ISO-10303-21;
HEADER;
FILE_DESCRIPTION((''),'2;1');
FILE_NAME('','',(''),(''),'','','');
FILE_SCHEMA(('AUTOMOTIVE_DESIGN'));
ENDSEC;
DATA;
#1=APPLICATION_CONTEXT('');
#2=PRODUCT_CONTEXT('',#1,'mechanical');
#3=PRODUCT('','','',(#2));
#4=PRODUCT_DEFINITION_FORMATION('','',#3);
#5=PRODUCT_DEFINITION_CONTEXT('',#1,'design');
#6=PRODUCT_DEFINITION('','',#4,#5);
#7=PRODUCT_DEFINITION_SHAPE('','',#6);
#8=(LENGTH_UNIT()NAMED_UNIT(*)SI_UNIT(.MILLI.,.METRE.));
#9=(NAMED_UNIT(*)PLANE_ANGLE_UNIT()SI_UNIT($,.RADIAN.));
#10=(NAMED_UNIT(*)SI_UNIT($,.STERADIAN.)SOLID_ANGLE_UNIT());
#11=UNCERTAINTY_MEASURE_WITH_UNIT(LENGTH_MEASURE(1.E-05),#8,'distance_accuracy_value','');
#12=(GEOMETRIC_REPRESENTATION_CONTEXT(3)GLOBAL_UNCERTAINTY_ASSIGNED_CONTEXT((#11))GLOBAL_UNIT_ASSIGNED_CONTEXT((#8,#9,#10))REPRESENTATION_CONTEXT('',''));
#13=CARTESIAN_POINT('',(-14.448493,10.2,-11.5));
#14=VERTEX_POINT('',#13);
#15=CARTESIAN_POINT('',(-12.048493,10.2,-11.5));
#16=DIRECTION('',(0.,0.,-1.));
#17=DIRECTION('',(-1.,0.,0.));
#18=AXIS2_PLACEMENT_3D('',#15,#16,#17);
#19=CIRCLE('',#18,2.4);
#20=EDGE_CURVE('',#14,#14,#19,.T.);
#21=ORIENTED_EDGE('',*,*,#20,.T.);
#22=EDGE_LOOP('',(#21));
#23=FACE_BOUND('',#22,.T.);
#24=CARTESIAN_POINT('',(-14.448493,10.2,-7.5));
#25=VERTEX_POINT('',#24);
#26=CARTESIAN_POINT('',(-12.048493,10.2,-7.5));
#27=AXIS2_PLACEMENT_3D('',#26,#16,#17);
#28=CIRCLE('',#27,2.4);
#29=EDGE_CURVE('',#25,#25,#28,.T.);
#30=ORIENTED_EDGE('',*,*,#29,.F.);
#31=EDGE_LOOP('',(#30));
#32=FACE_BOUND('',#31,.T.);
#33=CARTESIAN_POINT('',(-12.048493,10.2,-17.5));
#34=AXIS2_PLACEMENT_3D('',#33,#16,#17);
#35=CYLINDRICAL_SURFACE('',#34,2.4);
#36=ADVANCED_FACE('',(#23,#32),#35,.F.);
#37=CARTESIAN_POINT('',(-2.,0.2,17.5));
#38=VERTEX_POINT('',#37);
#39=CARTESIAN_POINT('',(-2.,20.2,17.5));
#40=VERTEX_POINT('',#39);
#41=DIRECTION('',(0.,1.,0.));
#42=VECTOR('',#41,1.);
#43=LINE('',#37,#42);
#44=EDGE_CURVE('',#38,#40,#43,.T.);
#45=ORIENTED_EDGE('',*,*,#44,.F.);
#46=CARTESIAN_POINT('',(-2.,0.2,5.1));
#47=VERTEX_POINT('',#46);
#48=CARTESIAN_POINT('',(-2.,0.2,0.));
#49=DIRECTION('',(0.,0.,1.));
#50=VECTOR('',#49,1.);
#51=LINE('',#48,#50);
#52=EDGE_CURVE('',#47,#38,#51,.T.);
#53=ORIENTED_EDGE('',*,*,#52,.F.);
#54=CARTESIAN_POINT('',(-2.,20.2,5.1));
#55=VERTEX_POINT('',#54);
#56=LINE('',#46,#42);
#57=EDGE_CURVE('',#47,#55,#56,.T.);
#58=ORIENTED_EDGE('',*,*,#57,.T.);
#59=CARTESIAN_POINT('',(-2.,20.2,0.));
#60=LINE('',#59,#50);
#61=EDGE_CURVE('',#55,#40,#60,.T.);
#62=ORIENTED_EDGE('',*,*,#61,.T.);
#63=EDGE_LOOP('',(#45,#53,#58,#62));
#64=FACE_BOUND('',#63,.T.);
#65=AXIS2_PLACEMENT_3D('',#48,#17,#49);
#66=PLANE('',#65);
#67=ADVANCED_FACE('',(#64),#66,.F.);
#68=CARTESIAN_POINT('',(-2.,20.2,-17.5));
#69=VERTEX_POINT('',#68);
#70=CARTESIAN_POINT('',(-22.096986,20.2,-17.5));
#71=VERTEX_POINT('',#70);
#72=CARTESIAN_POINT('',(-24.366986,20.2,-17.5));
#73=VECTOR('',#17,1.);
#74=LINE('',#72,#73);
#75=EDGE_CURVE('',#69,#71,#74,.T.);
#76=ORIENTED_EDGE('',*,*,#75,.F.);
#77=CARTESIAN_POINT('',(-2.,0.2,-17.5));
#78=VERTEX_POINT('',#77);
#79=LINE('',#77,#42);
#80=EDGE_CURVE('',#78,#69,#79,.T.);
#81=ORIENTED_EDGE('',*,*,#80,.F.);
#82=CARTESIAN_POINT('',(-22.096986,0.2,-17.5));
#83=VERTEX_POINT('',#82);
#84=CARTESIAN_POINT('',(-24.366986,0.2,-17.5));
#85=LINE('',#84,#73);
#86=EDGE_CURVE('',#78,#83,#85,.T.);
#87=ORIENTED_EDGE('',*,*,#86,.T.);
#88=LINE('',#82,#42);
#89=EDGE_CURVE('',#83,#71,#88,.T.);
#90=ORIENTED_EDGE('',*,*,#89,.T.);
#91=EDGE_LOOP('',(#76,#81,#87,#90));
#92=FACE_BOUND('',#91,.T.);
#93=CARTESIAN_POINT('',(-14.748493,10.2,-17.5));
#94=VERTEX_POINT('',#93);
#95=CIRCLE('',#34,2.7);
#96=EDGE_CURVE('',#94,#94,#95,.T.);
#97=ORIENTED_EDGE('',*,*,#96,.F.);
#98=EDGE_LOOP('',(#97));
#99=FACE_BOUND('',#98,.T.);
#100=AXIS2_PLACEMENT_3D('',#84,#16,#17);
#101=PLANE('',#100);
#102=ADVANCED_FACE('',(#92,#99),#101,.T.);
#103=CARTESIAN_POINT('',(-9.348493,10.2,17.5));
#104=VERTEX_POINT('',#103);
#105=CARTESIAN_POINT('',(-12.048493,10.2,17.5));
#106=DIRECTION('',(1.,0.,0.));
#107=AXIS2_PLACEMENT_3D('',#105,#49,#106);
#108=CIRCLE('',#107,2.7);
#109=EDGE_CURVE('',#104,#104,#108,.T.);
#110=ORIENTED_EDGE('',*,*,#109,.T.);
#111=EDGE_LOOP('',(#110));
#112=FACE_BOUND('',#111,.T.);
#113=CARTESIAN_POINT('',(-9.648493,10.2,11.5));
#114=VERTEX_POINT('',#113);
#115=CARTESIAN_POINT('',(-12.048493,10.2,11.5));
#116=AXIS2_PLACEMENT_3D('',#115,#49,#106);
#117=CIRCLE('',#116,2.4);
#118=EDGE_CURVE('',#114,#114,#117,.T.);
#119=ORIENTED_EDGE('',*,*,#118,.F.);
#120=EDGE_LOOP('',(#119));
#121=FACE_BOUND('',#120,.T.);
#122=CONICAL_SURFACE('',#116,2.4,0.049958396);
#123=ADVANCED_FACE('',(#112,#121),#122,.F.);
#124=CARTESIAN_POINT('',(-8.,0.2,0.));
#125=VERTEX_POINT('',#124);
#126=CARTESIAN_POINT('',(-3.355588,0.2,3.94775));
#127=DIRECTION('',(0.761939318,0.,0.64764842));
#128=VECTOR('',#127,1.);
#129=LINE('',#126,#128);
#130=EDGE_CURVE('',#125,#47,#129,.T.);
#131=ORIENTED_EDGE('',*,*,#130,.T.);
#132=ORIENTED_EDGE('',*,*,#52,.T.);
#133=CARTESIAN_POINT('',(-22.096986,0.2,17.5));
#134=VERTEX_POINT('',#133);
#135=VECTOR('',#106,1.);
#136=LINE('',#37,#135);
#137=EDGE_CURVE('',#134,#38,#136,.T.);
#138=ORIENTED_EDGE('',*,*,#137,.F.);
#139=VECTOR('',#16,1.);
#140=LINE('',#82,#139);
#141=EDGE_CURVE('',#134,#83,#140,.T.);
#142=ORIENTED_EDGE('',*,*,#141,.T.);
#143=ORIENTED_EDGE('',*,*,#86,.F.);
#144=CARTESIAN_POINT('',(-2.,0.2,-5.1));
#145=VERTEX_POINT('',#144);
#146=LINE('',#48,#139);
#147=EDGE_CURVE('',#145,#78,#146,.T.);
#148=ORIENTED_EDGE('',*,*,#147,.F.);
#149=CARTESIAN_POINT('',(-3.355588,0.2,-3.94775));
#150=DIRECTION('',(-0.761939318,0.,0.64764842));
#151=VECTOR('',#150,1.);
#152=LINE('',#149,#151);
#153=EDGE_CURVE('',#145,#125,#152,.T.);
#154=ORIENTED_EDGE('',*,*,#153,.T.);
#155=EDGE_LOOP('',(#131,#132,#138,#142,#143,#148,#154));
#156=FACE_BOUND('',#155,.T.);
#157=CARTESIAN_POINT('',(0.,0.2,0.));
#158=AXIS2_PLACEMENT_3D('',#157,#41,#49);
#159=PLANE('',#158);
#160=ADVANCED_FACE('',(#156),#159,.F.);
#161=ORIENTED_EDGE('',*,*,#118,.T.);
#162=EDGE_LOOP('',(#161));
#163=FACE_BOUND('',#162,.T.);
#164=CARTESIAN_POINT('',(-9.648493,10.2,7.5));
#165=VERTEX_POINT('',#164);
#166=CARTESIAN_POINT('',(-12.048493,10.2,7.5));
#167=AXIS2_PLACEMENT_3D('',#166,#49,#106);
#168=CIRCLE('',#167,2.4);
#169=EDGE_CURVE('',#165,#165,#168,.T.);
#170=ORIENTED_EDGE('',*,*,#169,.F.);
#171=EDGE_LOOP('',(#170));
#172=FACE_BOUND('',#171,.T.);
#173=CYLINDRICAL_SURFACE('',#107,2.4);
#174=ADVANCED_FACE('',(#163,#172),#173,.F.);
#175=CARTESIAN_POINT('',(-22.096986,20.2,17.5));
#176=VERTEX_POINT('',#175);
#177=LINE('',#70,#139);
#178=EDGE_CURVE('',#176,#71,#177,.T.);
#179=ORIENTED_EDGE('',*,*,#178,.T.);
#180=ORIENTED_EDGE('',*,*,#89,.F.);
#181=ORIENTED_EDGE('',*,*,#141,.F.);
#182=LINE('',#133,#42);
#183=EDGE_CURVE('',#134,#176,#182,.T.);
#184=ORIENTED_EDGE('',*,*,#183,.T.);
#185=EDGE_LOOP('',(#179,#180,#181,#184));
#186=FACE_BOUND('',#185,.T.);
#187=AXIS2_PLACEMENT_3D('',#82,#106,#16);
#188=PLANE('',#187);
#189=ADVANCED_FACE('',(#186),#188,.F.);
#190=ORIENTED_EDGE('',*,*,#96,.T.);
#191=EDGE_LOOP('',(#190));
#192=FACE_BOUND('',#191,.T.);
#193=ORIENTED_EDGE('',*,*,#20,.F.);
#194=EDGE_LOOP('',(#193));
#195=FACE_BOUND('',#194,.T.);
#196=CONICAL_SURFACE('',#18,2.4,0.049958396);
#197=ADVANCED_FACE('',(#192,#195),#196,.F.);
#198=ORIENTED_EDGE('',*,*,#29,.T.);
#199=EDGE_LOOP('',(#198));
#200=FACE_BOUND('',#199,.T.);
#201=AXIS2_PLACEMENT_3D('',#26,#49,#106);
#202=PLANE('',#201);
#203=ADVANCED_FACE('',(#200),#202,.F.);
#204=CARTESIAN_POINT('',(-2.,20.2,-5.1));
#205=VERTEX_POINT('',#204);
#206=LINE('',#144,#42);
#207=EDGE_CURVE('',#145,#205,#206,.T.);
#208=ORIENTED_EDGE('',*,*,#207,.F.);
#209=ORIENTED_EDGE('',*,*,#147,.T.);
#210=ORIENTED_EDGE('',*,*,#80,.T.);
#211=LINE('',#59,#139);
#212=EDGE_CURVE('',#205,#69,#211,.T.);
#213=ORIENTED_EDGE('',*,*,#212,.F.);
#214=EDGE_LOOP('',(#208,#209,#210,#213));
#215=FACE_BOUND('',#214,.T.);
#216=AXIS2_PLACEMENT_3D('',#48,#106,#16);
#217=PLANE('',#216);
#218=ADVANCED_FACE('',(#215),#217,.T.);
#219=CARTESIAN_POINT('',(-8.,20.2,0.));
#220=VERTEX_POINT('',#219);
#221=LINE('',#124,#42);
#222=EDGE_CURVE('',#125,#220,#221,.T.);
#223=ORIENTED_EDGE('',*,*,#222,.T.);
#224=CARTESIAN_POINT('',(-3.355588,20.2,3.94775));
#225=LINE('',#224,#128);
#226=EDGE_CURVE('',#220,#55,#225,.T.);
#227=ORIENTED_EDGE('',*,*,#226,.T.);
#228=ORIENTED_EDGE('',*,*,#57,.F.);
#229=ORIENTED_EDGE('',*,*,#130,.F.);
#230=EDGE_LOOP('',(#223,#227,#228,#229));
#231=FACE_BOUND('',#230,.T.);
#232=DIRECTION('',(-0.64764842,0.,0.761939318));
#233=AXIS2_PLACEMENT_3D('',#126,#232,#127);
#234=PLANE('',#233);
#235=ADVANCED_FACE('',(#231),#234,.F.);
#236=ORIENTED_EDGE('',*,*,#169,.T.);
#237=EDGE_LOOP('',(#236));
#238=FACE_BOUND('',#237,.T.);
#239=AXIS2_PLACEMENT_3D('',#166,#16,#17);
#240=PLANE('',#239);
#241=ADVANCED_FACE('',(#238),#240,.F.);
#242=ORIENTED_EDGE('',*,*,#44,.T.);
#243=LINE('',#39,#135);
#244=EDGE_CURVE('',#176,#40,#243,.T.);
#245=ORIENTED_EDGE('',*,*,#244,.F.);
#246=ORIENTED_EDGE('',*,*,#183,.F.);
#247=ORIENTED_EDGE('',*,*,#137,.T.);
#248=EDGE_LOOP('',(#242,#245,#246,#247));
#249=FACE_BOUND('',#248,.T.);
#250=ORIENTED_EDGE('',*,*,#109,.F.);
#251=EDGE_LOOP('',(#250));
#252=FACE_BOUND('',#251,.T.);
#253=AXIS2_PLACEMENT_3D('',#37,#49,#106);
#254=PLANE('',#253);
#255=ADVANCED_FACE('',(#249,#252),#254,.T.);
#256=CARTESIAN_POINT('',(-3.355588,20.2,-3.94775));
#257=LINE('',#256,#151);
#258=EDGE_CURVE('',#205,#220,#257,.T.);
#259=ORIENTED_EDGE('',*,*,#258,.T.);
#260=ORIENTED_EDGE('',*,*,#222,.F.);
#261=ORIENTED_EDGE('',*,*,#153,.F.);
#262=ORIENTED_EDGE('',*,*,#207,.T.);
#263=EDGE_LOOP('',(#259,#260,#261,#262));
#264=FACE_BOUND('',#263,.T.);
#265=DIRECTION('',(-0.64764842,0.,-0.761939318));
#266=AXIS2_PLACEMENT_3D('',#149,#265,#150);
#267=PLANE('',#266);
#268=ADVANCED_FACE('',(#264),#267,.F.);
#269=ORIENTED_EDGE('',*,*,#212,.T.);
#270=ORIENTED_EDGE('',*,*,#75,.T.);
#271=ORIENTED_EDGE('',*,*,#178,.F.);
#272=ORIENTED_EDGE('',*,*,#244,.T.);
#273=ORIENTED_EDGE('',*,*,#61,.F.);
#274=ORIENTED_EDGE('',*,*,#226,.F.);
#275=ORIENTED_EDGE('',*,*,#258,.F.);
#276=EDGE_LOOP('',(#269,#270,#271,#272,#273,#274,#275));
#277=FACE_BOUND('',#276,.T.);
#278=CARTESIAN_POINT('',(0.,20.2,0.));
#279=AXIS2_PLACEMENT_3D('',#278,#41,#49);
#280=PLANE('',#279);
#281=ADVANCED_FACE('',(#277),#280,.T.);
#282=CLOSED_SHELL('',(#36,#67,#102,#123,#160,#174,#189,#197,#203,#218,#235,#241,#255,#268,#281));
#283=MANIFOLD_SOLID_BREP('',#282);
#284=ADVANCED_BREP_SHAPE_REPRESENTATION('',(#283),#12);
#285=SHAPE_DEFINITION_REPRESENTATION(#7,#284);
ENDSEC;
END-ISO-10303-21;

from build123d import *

# Parameters (mm, degrees)
BOSS_EXTRUDE1_START       = 0.2
SKETCH2_R                 = 30
BOSS_EXTRUDE1_DEPTH       = 20
CUT_EXTRUDE2_DEPTH        = 47.904157598
SKETCH4_W                 = 60
SKETCH4_H                 = 60
SKETCH4_W_2               = 22.366985862
SKETCH4_H_2               = 35
CUT_EXTRUDE3_DEPTH        = 47.904157598
SKETCH11_W                = 2.27
SKETCH11_H                = 37.5
CUT_EXTRUDE4_DEPTH        = 37.055512755
HOLE1_D                   = 4.8
HOLE1_DEPTH               = 10
HOLE1_CBORE_D             = 5.4
HOLE1_CBORE_DEPTH         = 6
CHAMFER1_SIZE2            = 0.3
CHAMFER1_SIZE             = 6
CHAMFER1_OF_MIRROR1_SIZE2 = 0.3
CHAMFER1_OF_MIRROR1_SIZE  = 6


with BuildPart() as part:
    # Sketch2 → Boss-Extrude1 (new body)
    with BuildSketch(Plane(origin=(0, 0, 0), x_dir=(1, 0, 0), z_dir=(0, 1, 0)).offset(BOSS_EXTRUDE1_START)):
        with Locations(Location((0, 0, 0), (0, 0, 270))):
            Circle(SKETCH2_R)
    extrude(amount=BOSS_EXTRUDE1_DEPTH)

    # Sketch3 → Cut-Extrude2 (cut, through all)
    with BuildSketch(Plane(origin=(0, 20.2, 0), x_dir=(1, 0, 0), z_dir=(0, 1, 0))):
        with BuildLine():
            ThreePointArc((0, -17.5), (17.5, 0), (0, 17.5))
            Line((0, 17.5), (-2, 17.5))
            Line((-2, 17.5), (-2, 9.06190379))
            Line((-2, 9.06190379), (-2, 5.1))
            Line((-2, 5.1), (-8, 0))
            Line((-8, 0), (-2, -5.1))
            Line((-2, -5.1), (-2, -9.06190379))
            Line((-2, -9.06190379), (-2, -17.5))
            Line((-2, -17.5), (0, -17.5))
        make_face()
    extrude(amount=-CUT_EXTRUDE2_DEPTH, mode=Mode.SUBTRACT)

    # Sketch4 → Cut-Extrude3 (cut, through all)
    with BuildSketch(Plane(origin=(0, 20.2, 0), x_dir=(1, 0, 0), z_dir=(0, 1, 0))):
        Rectangle(SKETCH4_W, SKETCH4_H)
        with Locations((-13.183492931, 0)):
            Rectangle(SKETCH4_W_2, SKETCH4_H_2, mode=Mode.SUBTRACT)
    extrude(amount=-CUT_EXTRUDE3_DEPTH, mode=Mode.SUBTRACT)

    # Sketch11 → Cut-Extrude4 (cut, through all)
    with BuildSketch(Plane(origin=(0, 20.2, 0), x_dir=(1, 0, 0), z_dir=(0, 1, 0))):
        with Locations((-23.231985862, -1.25)):
            Rectangle(SKETCH11_W, SKETCH11_H)
    extrude(amount=-CUT_EXTRUDE4_DEPTH, mode=Mode.SUBTRACT)

    # Hole1
    with Locations(Plane.XY.offset(17.5)):
        with Locations((-12.048492931, 10.2)):
            hole1 = CounterBoreHole(HOLE1_D / 2, HOLE1_CBORE_D / 2, HOLE1_CBORE_DEPTH, depth=HOLE1_DEPTH)

    # Chamfer1
    chamfer1_edges = [part.edges().sort_by_distance(p)[0] for p in [
        (-14.748492931, 10.2, 11.5),
    ]]
    chamfer1_side = [part.faces().sort_by_distance(p)[0] for p in [
        (-14.748492931, 10.2, 11.506),
    ]]
    chamfer(chamfer1_edges, length=CHAMFER1_SIZE - 0.0001, length2=CHAMFER1_SIZE2 - 0.0001, reference=chamfer1_side[0])  # a hair under: the kernel refuses the full size

    # Mirror1: Hole1 across plane
    add(hole1.mirror(Plane.XY), mode=Mode.SUBTRACT)

    # Chamfer1 of Mirror1
    chamfer1_of_mirror1_edges = [part.edges().sort_by_distance(p)[0] for p in [
        (-14.748492931, 10.2, -11.5),
    ]]
    chamfer1_of_mirror1_side = [part.faces().sort_by_distance(p)[0] for p in [
        (-14.748492931, 10.2, -11.506),
    ]]
    chamfer(chamfer1_of_mirror1_edges, length=CHAMFER1_OF_MIRROR1_SIZE - 0.0001, length2=CHAMFER1_OF_MIRROR1_SIZE2 - 0.0001, reference=chamfer1_of_mirror1_side[0])  # a hair under: the kernel refuses the full size


solid = part.part
